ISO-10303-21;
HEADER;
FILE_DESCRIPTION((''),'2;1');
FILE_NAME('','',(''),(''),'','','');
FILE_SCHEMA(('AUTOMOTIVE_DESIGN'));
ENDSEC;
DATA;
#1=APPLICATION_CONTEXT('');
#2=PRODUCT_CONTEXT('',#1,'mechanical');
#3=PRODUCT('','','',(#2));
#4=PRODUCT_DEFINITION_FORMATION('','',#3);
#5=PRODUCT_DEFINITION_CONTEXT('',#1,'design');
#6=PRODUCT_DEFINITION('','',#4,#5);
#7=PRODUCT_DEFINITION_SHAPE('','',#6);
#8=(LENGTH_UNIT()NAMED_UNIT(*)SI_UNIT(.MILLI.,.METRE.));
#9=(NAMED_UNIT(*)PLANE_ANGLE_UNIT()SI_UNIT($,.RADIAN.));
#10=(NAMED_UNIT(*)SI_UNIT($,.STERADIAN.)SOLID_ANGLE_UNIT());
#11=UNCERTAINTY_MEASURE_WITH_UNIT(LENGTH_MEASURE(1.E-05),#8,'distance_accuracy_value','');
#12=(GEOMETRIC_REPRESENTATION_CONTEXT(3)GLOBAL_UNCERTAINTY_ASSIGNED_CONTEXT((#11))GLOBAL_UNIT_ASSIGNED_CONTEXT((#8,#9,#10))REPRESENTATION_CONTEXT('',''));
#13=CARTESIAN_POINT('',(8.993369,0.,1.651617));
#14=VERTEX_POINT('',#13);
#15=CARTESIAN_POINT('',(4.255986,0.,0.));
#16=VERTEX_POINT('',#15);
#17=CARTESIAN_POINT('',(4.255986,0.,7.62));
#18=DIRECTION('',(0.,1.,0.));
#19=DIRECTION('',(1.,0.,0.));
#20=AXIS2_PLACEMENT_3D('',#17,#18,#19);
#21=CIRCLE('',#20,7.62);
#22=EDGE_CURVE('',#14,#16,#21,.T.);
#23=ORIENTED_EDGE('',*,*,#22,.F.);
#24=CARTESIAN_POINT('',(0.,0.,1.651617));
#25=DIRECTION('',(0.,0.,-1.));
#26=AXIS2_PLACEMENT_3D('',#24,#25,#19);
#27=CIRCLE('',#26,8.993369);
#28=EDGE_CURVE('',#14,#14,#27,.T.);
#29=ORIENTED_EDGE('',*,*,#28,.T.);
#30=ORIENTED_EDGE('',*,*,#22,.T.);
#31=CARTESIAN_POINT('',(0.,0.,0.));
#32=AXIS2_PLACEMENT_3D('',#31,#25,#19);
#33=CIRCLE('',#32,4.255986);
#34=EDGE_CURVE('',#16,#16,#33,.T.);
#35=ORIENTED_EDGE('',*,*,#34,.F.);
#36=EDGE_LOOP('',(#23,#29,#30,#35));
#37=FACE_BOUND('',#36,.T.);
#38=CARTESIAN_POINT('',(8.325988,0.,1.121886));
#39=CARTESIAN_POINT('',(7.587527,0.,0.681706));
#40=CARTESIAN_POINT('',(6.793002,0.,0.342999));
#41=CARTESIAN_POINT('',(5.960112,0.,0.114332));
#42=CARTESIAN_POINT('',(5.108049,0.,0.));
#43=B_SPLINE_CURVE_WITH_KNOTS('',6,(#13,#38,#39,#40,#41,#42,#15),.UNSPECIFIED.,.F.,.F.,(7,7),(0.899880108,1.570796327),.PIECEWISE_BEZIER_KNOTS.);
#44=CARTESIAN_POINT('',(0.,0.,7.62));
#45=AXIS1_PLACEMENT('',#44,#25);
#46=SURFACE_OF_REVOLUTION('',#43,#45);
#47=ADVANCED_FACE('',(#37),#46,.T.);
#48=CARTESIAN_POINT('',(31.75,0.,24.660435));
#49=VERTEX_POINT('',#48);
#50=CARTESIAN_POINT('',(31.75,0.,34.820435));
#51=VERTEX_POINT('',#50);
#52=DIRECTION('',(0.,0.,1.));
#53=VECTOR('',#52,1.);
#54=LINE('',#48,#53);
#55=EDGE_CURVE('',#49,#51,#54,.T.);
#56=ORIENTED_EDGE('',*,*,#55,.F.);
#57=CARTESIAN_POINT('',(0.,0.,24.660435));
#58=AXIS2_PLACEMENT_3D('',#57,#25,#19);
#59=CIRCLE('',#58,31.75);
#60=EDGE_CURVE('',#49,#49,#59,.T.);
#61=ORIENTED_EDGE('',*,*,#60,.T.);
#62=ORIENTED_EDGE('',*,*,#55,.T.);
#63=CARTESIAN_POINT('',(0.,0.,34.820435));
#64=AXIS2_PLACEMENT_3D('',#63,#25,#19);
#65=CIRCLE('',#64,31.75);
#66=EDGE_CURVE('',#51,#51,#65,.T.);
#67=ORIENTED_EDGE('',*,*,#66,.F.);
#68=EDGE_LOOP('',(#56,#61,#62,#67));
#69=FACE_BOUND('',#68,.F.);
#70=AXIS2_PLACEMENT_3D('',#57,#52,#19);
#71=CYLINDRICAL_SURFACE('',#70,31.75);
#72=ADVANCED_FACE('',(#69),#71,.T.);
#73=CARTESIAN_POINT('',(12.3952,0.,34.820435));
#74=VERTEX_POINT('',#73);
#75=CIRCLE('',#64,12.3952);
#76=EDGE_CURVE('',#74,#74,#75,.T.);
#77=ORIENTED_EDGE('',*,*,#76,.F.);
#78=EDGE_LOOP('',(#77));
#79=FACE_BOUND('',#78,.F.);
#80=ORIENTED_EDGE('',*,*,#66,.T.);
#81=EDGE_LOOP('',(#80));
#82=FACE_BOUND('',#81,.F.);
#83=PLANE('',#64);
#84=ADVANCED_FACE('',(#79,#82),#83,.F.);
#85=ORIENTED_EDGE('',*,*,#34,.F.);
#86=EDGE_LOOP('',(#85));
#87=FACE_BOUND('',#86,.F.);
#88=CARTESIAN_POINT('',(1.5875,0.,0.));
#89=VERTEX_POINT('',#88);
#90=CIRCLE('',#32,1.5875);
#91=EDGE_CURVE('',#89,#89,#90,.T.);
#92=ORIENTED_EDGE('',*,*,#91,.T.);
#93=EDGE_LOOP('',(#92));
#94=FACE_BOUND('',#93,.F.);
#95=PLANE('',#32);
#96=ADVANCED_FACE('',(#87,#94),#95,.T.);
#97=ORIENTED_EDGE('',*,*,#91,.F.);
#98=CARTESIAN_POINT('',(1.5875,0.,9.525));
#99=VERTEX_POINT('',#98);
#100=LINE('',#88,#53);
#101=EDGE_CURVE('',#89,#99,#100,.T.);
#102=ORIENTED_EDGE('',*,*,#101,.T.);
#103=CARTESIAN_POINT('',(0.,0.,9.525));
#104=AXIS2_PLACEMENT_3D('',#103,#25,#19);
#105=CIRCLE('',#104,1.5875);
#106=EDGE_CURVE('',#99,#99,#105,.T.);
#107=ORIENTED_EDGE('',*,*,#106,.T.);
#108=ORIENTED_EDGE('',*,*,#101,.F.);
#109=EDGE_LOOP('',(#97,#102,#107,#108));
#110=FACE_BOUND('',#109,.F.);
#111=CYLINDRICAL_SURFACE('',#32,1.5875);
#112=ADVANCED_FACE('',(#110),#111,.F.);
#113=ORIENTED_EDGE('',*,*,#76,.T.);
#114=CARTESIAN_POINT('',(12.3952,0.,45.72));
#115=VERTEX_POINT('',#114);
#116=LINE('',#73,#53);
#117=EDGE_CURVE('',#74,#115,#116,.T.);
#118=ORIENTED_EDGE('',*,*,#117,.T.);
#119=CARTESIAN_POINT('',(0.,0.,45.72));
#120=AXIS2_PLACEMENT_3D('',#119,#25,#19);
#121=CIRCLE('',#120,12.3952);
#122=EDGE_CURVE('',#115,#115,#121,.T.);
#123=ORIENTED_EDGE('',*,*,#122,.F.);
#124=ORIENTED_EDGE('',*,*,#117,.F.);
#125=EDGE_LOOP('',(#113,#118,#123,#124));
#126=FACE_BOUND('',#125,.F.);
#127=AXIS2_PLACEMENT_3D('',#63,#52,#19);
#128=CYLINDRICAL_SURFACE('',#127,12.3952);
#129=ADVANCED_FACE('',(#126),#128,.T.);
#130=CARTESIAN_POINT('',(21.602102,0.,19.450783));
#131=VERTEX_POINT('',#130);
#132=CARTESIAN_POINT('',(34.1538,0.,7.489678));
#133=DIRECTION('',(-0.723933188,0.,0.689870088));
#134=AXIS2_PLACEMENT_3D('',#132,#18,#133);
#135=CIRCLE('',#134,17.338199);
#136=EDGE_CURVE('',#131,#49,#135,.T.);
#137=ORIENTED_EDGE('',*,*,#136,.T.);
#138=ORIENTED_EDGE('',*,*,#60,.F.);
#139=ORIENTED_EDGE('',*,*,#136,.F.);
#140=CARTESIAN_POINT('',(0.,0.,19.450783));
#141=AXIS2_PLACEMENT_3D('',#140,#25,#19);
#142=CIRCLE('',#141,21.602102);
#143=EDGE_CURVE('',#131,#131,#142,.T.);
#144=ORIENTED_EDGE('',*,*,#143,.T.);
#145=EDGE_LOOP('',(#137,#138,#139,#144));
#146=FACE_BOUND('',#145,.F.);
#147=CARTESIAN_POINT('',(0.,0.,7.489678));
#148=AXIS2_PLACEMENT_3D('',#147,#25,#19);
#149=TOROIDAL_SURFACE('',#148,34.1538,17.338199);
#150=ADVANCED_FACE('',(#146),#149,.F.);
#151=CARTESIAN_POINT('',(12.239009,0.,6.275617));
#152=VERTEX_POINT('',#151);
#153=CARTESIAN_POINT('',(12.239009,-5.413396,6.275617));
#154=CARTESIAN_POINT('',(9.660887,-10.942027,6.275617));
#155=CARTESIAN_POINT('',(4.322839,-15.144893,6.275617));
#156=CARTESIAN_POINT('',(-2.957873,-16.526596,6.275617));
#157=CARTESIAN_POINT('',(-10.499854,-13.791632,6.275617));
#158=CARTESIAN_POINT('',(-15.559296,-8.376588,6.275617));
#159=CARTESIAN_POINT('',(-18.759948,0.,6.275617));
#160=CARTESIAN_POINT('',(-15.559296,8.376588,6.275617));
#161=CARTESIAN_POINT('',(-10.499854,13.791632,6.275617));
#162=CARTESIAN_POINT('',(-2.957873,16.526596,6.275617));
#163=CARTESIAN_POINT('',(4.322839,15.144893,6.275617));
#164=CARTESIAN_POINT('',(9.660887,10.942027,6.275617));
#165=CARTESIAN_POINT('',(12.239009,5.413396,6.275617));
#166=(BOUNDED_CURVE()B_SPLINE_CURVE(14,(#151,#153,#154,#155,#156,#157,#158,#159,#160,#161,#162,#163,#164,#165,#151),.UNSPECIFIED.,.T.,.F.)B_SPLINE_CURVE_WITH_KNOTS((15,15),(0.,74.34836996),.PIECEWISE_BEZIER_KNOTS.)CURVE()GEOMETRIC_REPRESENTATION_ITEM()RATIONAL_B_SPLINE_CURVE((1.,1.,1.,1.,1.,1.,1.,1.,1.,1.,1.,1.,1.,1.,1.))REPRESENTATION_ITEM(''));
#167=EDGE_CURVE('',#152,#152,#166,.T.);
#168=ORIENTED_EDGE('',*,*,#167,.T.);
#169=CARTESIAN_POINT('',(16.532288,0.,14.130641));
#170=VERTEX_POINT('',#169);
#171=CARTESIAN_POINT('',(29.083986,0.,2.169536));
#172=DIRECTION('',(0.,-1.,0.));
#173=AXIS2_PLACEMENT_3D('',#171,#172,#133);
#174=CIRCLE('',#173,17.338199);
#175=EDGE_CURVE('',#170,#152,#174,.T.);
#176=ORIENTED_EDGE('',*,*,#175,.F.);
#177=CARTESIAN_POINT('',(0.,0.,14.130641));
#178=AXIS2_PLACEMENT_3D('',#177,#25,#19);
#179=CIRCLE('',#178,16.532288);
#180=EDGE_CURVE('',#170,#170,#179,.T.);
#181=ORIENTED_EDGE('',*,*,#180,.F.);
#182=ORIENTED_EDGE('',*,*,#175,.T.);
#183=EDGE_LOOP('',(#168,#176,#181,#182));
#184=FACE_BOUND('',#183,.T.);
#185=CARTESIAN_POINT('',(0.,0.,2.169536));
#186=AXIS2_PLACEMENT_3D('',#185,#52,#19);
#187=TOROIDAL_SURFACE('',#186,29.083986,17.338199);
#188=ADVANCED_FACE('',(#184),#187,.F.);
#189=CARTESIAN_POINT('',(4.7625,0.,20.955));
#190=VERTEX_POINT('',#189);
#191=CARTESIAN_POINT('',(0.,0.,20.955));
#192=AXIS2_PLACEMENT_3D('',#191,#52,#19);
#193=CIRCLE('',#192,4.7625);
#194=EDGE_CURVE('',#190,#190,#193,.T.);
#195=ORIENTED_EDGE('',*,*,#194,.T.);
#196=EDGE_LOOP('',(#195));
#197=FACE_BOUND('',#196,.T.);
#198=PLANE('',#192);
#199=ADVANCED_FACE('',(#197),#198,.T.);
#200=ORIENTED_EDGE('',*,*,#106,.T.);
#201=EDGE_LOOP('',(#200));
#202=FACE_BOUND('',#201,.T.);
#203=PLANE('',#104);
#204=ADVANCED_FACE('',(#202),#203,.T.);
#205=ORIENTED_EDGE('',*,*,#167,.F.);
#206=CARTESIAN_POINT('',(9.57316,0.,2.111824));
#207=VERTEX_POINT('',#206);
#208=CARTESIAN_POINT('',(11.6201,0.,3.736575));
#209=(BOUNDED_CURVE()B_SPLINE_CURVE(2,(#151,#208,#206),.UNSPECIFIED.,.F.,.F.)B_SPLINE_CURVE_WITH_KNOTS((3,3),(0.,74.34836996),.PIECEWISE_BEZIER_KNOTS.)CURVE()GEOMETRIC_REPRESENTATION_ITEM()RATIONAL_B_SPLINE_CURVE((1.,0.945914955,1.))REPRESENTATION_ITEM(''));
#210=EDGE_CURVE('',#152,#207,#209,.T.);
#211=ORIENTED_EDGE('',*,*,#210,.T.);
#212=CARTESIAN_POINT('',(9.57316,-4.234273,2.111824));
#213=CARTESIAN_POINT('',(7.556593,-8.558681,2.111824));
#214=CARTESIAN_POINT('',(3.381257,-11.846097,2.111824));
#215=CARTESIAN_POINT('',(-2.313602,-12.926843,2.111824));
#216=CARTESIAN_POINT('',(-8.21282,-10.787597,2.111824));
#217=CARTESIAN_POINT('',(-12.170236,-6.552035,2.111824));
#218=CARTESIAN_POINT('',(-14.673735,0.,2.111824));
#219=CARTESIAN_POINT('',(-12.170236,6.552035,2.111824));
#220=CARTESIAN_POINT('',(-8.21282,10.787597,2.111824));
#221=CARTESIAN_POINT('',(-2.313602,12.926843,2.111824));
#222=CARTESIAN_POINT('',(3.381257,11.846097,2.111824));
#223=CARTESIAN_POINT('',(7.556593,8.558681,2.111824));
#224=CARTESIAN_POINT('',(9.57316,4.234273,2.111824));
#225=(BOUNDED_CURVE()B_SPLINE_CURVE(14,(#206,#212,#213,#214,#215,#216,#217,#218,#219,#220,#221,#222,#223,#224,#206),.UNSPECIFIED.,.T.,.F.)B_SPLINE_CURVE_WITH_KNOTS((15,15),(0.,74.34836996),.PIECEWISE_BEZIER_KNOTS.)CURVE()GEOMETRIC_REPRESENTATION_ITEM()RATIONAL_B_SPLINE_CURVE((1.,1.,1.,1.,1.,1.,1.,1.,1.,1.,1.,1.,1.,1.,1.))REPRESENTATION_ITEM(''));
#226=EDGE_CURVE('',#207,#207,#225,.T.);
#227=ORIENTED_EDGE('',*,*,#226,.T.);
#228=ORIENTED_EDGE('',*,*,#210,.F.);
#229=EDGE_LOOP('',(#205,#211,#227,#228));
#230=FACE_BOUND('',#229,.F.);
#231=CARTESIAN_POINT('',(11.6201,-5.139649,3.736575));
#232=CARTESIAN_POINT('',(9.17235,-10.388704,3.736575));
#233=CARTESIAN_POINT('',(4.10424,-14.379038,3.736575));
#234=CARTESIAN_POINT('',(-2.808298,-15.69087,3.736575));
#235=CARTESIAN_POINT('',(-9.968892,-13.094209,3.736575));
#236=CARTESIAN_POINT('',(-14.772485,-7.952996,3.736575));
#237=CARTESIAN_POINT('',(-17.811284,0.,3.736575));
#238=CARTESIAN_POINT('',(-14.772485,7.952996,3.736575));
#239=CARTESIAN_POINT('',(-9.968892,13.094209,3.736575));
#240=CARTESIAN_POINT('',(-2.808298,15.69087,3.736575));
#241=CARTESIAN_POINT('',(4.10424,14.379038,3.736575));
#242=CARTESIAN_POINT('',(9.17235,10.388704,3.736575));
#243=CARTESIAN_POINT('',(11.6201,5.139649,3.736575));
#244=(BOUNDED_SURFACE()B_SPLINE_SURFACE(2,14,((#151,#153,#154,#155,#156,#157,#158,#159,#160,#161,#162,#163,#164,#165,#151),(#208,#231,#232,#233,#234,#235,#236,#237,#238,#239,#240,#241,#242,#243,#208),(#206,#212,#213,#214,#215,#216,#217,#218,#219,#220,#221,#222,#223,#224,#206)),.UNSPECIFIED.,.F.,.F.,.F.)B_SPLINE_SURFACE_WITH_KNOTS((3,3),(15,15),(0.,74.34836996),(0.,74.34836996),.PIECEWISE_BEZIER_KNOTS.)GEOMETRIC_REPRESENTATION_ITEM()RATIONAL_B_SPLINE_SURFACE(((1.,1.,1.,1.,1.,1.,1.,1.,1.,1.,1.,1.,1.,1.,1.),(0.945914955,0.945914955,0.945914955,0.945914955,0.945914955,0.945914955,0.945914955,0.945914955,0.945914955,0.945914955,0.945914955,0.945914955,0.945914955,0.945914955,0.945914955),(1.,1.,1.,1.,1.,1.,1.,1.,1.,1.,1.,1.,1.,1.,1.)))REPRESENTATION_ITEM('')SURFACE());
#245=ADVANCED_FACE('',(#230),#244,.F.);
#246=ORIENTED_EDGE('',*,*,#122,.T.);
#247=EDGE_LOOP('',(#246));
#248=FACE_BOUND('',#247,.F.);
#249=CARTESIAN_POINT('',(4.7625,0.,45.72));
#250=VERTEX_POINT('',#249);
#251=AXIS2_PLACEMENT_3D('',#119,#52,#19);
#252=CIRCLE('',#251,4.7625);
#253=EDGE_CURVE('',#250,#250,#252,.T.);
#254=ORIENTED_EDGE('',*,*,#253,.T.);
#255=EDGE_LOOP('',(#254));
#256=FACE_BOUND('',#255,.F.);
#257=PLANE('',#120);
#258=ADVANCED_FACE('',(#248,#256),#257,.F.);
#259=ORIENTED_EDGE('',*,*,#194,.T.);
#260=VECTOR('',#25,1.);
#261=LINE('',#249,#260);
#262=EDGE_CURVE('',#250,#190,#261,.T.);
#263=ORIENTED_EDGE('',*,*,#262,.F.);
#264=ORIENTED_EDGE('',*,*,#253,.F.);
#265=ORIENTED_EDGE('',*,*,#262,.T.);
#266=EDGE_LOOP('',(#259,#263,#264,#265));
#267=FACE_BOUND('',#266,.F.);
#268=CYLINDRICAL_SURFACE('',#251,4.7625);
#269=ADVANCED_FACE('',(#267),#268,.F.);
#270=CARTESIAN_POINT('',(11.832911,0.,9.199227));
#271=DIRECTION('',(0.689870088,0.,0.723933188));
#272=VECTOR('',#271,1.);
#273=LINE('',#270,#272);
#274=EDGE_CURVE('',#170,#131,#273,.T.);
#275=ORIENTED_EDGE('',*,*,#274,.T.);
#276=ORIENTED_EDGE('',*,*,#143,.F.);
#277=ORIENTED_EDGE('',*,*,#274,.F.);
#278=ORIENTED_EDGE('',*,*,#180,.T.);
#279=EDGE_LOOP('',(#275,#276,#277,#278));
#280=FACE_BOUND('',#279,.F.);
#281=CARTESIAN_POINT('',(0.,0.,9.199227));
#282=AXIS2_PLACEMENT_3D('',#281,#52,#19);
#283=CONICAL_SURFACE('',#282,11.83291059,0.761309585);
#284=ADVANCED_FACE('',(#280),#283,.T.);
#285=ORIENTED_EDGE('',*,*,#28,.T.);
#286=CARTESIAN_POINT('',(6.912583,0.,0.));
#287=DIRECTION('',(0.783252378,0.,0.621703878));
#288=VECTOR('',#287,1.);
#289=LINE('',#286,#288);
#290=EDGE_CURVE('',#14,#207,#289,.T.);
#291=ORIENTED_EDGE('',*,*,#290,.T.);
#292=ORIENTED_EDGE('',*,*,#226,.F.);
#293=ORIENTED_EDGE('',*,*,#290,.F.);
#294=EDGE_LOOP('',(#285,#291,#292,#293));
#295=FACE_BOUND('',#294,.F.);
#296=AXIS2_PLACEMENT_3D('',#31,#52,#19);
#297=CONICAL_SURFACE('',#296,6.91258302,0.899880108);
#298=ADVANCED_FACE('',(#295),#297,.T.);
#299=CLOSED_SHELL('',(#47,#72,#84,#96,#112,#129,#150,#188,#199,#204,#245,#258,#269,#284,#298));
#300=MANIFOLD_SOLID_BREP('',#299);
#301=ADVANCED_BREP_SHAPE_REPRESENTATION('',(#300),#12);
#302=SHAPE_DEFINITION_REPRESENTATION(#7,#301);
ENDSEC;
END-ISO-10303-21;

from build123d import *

# Parameters (mm, degrees)
F2_R     = 4.7625
F3_DEPTH = 24.765
F4_R     = 1.5875
F5_DEPTH = 9.525
F7_R     = 7.62


# Not quite as in the source:
# - a fillet or chamfer that OpenCascade refuses, or shapes differently, is made with other operations: its cross-section is extruded or revolved along the edge and cut away or added


with BuildPart() as f1:
    # F0 (on Front) → F1 (revolve)
    with BuildSketch(Plane.XZ):
        Polygon((11.8329105899, 9.1992265151), (26.5666254177, 24.660434838), (31.75, 24.660434838), (31.75, 34.820434838), (12.3952, 34.820434838), (12.3952, 45.72), (0, 45.72), (0, 0), (4.4022302061, 0), (9.0794198883, 6.3097791593), align=None)
        Polygon((11.8329105899, 3.9054930676), (11.8329105899, 9.1992265151), (9.0794198883, 6.3097791593), (4.4022302061, 0), (6.9125830196, 0), align=None)
    revolve(axis=Axis((0, 0, 22.86), (0, 0, -1)))

    # F2 (on face) → F3 (cut)
    with BuildSketch(Plane.XY.offset(45.72)):
        Circle(F2_R)
    extrude(amount=-F3_DEPTH, mode=Mode.SUBTRACT)

    # F4 (on face) → F5 (cut)
    with BuildSketch(Plane(origin=(0, 0, 0), x_dir=(1, 0, 0), z_dir=(0, 0, -1))):
        Circle(F4_R)
    extrude(amount=-F5_DEPTH, mode=Mode.SUBTRACT)

    # F6: fillet of radius 17.3381993495 on 3 edges, made by hand

    # F6_s1 → F6_t2 (revolve)
    with BuildSketch(Plane.XZ):
        with BuildLine():
            ThreePointArc((16.5322882716, 14.130641177), (13.3299473179, 9.4099376621), (11.8329105899, 3.9054930676))
            Line((11.8329105899, 3.9054930676), (11.4878890775, 3.9402122077))
            ThreePointArc((11.4878890775, 3.9402122077), (11.4861466029, 6.5523597914), (11.4861466029, 9.1992265151))
            Line((11.4861466029, 9.1992265151), (11.5818766312, 9.4384486175))
            Line((11.5818766312, 9.4384486175), (16.2812543129, 14.3698632794))
            Line((16.2812543129, 14.3698632794), (16.5322882716, 14.130641177))
        make_face()
    revolve(axis=Axis((0, 0, 9.1992265151), (0, 0, -1)))

    # F6_s3 → F6_t4 (revolve)
    with BuildSketch(Plane.XZ):
        with BuildLine():
            ThreePointArc((21.6021022057, 19.4507827916), (26.2353502113, 22.9140514833), (31.75, 24.660434838))
            Line((31.75, 24.660434838), (31.7019239972, 25.0038499813))
            ThreePointArc((31.7019239972, 25.0038499813), (29.1583127088, 25.007198825), (26.5666254177, 25.007198825))
            Line((26.5666254177, 25.007198825), (26.3155914589, 24.8996569403))
            Line((26.3155914589, 24.8996569403), (21.351068247, 19.6900048939))
            Line((21.351068247, 19.6900048939), (21.6021022057, 19.4507827916))
        make_face()
    revolve(axis=Axis((0, 0, 24.660434838), (0, 0, -1)))

    # F7
    f7_edges = [f1.edges().sort_by_distance(p)[0] for p in [
        (9.372747, 0, 1.952747),
        (-11.832911, 0, 3.905493),
        (-6.912583, 0, 0),
    ]]
    fillet(f7_edges, radius=F7_R)


solid = f1.part
